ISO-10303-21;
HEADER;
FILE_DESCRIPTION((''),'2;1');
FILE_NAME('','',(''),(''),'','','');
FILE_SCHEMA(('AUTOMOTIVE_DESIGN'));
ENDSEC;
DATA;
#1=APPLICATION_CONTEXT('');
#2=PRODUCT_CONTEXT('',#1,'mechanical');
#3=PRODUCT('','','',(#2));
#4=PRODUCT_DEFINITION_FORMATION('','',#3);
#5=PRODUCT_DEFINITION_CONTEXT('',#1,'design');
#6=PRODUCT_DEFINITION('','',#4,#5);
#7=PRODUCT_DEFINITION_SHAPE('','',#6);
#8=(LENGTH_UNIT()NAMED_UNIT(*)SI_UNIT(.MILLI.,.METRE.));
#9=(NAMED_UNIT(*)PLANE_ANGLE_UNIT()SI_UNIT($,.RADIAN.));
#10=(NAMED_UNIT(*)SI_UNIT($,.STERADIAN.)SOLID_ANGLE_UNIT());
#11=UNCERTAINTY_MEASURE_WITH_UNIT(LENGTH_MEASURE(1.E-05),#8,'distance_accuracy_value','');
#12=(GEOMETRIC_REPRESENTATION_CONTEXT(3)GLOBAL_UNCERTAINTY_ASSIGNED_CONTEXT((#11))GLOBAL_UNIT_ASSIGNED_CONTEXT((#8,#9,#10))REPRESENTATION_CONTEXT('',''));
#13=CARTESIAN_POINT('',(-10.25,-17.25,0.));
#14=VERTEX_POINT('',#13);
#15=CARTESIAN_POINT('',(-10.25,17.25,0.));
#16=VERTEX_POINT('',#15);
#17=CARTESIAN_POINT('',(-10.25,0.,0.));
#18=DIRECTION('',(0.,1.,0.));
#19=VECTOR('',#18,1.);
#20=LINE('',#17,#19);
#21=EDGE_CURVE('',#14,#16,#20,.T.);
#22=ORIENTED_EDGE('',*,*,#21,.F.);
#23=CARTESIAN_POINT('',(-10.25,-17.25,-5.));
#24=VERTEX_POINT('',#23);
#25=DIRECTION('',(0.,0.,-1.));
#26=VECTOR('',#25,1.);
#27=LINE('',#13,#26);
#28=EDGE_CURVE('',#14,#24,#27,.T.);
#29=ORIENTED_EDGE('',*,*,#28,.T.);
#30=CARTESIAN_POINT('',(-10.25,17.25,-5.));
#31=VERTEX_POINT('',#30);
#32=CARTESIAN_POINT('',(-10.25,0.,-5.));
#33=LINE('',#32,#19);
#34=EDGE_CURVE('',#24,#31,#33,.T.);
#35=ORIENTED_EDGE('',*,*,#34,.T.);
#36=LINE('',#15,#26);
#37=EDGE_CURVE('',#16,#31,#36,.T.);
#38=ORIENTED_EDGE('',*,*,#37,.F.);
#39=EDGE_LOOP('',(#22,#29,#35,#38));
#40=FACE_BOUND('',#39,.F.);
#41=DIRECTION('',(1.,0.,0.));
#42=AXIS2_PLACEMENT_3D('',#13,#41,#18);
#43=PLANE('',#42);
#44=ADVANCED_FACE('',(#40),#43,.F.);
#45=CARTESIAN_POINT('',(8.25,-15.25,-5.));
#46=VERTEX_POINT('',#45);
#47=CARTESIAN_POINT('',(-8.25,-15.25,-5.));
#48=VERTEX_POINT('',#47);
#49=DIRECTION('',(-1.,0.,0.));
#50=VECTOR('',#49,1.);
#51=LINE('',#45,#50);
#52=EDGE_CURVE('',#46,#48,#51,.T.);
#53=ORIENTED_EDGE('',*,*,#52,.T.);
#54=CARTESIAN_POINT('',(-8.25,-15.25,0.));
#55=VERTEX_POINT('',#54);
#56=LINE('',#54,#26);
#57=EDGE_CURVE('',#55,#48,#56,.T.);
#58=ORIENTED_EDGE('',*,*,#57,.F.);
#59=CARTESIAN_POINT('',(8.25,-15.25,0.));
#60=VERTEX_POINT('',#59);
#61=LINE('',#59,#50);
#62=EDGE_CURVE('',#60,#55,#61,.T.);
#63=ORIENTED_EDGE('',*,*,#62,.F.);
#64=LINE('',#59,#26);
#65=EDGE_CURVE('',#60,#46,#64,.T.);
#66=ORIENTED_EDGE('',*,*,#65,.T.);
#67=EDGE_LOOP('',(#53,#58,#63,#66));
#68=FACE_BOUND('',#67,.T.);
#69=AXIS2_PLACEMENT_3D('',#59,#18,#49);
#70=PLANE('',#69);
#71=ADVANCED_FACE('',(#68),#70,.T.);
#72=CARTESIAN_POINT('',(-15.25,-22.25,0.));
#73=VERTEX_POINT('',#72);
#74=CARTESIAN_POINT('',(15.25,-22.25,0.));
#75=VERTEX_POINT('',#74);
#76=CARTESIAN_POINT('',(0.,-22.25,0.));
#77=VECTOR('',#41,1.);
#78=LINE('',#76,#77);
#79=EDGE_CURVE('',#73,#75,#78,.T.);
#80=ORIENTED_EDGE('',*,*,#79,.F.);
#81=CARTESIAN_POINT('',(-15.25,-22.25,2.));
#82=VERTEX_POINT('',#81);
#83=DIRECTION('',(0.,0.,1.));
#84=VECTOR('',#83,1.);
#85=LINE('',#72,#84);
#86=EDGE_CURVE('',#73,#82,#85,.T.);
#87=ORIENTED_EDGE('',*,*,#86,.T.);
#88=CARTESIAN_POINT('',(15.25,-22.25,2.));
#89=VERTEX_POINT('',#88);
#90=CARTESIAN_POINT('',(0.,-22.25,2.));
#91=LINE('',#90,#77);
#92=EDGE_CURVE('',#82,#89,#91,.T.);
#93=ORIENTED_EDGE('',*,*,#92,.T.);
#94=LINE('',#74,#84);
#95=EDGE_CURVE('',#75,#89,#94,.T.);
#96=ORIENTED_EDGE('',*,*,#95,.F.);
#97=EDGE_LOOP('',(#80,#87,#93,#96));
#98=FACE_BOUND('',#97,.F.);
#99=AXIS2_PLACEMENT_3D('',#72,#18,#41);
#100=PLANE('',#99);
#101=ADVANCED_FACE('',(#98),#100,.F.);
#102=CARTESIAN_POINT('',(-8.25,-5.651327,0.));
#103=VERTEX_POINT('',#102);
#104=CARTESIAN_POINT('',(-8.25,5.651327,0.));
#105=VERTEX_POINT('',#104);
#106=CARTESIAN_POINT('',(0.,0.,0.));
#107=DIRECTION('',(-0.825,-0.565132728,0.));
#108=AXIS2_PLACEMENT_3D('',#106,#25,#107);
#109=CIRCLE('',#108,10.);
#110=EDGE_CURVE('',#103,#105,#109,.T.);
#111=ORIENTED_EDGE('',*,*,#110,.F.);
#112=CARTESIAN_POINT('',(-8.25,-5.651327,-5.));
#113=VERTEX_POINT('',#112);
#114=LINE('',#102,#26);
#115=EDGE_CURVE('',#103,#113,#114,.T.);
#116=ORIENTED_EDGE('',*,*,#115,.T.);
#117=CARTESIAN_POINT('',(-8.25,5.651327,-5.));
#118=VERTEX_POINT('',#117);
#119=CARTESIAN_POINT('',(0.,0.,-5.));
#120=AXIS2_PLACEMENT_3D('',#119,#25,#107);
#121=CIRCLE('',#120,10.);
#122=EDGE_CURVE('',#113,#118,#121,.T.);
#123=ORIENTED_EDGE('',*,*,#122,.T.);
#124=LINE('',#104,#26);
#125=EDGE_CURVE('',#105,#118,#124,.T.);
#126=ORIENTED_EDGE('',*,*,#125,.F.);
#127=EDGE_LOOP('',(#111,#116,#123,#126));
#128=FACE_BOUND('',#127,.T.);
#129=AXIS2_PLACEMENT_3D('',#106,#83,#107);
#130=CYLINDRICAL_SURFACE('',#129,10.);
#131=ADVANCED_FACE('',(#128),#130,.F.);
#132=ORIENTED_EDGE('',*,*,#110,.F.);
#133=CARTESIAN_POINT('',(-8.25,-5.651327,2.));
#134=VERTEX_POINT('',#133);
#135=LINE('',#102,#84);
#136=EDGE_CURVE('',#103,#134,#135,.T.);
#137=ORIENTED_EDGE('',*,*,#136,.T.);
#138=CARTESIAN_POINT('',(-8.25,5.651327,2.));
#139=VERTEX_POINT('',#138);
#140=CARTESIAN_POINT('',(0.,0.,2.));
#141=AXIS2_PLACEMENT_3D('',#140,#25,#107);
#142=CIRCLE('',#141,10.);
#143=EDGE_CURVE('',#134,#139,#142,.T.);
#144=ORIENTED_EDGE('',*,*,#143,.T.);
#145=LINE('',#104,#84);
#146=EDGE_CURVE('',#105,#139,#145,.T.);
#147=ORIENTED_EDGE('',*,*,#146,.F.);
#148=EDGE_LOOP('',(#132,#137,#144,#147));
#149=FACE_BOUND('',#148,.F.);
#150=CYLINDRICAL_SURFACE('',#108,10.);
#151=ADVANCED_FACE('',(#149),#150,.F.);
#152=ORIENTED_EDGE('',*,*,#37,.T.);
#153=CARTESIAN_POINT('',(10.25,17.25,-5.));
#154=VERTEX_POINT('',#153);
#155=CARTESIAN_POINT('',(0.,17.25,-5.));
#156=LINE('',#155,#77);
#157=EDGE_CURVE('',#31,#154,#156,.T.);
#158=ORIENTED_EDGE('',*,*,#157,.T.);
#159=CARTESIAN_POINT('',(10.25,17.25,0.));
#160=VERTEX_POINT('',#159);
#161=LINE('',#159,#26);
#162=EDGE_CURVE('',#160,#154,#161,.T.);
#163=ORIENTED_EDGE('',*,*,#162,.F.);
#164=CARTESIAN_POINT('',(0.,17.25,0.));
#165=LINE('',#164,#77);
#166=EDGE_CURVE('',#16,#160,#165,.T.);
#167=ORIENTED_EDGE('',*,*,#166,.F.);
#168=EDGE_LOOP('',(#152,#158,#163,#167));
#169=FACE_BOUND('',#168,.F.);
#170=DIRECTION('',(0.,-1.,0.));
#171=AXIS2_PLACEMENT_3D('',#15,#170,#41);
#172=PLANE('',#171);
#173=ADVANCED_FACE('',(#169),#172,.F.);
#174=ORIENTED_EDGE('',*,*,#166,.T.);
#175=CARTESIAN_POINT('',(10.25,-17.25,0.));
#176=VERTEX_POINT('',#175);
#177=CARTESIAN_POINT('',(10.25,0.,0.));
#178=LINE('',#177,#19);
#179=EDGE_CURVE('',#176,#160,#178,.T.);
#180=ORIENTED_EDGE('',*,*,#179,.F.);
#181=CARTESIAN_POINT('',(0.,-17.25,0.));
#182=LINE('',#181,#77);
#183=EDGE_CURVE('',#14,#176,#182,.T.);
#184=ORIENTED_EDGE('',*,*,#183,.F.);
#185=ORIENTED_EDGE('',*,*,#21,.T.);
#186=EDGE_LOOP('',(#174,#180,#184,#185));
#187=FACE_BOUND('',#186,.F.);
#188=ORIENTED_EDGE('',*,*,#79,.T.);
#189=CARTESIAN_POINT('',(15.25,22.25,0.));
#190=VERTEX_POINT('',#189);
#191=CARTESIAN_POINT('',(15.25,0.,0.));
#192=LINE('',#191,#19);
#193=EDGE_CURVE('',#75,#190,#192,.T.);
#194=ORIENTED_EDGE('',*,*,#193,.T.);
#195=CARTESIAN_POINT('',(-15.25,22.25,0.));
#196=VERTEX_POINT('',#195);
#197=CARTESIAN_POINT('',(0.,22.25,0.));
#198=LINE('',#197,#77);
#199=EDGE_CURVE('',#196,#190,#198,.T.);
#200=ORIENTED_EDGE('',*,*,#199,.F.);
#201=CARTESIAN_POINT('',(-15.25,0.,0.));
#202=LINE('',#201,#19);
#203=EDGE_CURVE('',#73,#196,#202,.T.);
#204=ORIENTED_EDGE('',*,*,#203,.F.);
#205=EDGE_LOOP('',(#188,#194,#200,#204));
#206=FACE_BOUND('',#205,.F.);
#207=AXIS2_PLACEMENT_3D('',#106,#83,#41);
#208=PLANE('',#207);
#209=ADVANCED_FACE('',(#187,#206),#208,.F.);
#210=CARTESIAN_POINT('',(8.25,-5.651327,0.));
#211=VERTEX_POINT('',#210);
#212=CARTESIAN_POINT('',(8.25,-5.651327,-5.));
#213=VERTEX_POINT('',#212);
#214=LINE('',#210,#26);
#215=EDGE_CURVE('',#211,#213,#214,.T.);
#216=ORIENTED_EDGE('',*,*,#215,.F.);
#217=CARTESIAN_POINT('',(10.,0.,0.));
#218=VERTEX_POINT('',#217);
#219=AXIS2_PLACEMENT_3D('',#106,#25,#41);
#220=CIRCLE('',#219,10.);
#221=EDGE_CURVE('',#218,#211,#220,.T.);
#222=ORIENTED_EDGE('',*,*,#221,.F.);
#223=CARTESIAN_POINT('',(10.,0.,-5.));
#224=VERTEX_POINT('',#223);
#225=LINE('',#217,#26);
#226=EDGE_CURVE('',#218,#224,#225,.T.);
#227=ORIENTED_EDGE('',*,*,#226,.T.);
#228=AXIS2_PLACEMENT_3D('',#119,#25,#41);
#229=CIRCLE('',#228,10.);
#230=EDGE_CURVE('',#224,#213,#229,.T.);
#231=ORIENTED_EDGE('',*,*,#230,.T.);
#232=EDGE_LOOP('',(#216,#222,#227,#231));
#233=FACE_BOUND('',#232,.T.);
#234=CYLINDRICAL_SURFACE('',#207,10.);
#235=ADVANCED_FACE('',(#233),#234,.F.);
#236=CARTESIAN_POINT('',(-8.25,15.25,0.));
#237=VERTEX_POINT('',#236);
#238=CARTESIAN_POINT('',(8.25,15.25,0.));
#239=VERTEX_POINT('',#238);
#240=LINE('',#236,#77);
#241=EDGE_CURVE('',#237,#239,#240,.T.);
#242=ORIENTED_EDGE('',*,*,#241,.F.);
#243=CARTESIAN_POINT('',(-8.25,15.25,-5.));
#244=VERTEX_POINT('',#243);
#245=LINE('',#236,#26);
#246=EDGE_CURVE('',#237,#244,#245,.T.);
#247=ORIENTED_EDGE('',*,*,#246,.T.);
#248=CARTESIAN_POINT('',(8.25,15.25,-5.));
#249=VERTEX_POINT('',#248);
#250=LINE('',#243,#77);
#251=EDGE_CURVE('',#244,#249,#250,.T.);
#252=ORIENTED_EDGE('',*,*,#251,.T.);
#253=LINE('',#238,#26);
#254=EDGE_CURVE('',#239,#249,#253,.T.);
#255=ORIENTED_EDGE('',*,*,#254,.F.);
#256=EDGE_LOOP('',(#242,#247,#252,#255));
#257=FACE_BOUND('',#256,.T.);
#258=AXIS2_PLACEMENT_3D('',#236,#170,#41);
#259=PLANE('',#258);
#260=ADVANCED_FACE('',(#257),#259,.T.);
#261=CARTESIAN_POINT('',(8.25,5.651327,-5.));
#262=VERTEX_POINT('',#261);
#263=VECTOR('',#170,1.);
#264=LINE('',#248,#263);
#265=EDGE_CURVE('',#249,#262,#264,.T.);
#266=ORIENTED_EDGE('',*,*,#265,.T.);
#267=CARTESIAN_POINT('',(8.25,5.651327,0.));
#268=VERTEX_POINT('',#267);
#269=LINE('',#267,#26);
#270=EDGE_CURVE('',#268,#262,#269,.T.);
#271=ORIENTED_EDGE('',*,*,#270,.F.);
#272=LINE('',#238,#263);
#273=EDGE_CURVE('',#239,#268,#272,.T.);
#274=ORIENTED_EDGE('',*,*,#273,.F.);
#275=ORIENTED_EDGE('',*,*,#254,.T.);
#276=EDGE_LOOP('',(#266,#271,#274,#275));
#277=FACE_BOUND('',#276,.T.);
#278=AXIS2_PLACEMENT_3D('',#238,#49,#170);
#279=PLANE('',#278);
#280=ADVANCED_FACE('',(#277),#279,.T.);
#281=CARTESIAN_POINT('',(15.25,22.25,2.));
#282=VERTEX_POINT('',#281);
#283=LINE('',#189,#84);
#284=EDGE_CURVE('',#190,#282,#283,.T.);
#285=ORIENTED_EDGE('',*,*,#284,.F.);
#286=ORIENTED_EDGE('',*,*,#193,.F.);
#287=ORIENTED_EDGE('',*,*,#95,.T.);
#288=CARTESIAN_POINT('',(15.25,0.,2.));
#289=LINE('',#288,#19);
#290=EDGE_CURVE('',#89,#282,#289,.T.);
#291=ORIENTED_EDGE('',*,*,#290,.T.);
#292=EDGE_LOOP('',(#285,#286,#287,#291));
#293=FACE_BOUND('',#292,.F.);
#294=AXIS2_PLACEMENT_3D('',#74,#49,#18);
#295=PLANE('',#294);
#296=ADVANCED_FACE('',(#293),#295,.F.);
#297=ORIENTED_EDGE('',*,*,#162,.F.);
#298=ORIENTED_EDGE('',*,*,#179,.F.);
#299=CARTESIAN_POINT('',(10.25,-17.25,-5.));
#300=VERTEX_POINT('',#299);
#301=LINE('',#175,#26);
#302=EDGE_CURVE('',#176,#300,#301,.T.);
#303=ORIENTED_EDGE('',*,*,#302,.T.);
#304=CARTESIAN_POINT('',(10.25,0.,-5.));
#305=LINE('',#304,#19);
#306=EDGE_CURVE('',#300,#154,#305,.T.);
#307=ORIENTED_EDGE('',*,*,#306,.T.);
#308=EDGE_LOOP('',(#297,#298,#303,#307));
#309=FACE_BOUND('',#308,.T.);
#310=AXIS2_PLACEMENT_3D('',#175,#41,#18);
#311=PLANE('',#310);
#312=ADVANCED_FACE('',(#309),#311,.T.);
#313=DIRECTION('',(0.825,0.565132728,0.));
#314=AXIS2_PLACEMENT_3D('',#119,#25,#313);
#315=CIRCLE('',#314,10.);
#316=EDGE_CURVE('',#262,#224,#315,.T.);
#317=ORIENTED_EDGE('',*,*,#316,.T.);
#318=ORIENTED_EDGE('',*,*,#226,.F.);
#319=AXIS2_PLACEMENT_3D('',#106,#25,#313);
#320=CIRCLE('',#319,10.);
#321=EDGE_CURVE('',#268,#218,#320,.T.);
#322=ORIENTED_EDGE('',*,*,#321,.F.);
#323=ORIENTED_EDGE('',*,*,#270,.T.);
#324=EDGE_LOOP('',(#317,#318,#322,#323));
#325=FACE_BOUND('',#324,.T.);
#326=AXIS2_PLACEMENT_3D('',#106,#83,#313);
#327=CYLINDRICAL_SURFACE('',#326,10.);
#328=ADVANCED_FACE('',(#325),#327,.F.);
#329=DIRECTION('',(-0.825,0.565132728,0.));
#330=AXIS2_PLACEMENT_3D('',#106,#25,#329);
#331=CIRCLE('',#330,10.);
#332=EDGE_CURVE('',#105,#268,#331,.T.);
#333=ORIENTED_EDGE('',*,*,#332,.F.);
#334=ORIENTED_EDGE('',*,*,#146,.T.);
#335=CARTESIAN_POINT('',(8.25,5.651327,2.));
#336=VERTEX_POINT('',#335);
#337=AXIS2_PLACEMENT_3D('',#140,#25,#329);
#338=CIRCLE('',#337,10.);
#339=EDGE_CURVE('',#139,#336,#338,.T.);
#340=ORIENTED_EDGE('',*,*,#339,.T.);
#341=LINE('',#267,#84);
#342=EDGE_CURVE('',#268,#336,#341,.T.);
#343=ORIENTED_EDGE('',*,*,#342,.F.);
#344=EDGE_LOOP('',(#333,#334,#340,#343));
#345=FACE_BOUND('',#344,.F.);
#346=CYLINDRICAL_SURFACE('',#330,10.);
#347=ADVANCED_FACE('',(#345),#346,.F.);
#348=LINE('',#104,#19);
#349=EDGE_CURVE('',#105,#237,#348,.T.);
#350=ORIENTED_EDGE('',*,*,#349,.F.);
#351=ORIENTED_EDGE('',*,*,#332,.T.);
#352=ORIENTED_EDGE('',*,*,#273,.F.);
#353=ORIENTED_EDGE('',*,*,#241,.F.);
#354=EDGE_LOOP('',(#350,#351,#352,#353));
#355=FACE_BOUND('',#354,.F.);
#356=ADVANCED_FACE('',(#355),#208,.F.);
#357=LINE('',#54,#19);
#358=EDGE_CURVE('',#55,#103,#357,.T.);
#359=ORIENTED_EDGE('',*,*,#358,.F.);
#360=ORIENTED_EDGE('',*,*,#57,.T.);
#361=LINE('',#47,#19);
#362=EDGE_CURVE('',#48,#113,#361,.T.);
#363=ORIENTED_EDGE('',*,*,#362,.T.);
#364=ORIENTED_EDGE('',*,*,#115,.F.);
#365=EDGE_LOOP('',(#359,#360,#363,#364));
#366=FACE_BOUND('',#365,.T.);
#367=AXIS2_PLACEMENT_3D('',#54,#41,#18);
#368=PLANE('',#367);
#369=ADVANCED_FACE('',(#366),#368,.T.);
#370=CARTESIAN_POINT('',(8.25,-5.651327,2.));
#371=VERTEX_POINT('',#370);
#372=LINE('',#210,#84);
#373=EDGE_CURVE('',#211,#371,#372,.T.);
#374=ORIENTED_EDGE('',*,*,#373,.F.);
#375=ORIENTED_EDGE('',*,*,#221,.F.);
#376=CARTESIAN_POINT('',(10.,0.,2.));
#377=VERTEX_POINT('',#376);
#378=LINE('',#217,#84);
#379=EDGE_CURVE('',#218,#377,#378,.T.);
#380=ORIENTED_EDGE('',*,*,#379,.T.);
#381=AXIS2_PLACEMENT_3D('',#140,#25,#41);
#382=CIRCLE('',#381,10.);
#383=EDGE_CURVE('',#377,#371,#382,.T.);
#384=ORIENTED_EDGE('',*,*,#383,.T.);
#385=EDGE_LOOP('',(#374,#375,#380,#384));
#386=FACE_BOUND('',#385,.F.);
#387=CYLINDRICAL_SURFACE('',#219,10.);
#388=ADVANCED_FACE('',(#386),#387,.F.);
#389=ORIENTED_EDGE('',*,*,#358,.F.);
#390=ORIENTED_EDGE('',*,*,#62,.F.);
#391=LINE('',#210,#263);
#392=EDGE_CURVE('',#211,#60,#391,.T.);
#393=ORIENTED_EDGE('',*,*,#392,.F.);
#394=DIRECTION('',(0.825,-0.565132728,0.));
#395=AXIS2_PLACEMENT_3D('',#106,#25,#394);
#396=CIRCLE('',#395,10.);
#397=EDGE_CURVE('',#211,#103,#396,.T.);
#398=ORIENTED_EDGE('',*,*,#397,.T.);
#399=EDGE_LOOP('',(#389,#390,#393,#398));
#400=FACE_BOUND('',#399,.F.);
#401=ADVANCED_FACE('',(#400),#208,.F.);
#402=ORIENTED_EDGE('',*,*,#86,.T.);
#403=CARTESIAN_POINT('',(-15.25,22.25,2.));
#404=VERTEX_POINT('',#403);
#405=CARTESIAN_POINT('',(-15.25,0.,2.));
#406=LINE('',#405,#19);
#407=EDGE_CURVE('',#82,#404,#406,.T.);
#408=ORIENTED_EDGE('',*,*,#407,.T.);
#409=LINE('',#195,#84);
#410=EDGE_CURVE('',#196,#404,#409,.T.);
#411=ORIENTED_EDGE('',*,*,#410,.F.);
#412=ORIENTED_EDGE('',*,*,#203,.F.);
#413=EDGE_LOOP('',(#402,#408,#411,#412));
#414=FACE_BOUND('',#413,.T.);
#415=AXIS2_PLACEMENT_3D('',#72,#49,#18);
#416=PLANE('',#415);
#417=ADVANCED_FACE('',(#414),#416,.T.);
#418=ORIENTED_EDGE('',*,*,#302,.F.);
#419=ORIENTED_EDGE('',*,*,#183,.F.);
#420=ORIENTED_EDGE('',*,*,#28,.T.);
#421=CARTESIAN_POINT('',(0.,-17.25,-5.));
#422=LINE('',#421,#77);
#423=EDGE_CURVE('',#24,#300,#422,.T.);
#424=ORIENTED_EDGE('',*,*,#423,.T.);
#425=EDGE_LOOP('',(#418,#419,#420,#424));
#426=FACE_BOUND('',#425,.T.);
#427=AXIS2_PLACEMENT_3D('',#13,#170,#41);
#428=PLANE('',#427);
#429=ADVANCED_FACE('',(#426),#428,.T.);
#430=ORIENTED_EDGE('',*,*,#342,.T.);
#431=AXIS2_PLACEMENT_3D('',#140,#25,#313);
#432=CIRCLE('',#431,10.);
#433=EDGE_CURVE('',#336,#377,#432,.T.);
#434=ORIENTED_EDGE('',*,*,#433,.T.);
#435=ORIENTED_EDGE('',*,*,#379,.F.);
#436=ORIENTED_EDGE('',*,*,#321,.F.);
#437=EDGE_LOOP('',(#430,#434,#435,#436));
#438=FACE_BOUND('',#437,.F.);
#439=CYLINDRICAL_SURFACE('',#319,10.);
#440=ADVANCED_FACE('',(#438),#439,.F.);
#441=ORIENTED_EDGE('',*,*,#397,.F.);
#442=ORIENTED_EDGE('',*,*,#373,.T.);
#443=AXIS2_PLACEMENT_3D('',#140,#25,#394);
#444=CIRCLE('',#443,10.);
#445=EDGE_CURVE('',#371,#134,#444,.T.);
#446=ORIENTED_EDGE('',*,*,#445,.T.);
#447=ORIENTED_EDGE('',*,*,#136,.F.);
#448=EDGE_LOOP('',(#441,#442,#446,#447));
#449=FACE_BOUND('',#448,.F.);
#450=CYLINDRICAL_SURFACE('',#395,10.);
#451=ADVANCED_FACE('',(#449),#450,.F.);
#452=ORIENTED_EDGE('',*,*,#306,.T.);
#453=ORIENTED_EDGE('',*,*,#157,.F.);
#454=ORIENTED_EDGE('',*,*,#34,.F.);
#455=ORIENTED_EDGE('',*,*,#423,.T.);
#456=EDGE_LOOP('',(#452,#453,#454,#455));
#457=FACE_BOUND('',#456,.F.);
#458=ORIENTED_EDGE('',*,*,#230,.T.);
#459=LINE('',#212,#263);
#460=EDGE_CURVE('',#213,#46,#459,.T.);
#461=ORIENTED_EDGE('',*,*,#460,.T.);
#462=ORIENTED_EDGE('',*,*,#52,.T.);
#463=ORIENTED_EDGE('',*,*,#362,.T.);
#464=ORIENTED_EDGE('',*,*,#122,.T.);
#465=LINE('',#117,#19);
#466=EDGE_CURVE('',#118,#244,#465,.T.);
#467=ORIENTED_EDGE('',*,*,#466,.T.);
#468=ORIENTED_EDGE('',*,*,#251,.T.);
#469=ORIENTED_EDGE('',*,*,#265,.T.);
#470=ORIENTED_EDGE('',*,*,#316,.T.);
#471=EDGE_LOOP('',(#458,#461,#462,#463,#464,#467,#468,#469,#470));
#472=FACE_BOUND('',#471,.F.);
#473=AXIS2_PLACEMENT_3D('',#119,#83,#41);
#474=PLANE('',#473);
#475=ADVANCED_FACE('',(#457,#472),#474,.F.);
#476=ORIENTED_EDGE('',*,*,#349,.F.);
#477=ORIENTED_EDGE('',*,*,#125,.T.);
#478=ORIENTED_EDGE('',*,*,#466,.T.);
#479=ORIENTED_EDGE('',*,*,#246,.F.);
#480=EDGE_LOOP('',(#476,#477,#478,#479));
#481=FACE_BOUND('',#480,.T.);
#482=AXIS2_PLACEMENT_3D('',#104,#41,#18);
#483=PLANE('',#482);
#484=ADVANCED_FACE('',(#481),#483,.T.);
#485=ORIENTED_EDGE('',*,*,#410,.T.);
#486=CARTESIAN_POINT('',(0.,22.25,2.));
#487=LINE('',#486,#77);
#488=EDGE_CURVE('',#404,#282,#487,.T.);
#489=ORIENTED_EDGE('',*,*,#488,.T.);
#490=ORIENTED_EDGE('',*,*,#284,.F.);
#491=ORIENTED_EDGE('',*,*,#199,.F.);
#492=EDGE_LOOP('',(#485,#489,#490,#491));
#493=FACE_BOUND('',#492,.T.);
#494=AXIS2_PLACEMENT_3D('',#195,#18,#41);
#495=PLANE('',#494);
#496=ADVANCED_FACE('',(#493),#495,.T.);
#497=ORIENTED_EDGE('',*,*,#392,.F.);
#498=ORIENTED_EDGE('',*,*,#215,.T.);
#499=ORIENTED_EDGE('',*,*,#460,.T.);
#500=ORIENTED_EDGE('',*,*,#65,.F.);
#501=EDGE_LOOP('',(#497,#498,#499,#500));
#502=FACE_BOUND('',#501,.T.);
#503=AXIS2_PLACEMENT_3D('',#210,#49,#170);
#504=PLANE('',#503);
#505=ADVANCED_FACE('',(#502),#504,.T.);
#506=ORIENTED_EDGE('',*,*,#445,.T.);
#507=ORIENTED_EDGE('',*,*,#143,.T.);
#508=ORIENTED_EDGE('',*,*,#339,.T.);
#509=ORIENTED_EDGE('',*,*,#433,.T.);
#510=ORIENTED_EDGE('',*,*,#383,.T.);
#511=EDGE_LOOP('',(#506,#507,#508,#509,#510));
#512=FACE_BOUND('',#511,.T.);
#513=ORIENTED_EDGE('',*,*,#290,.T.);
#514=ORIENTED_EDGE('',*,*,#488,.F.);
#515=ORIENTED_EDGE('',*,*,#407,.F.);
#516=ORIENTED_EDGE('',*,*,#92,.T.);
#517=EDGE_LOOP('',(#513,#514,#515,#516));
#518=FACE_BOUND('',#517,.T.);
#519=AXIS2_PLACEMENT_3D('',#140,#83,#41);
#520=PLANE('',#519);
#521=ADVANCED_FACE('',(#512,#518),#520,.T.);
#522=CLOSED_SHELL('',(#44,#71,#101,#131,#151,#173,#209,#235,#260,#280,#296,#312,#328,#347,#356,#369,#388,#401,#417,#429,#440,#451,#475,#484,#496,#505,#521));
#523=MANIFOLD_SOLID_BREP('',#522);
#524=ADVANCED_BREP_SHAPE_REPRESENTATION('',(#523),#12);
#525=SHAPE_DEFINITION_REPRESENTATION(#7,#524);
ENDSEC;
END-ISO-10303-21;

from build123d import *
from build123d import SkipClean  # not in build123d's __all__

# Parameters (mm, degrees)
F0_W     = 30.5
F0_H     = 44.5
F0_W_2   = 20.5
F0_H_2   = 34.5
F1_DEPTH = 2
F2_DEPTH = 5


with BuildPart() as f1:
    # F0 (on Top) → F1 (new body)
    with BuildSketch(Plane.XY):
        Rectangle(F0_W, F0_H)
        Rectangle(F0_W_2, F0_H_2, mode=Mode.SUBTRACT)
        Rectangle(F0_W_2, F0_H_2)
        with BuildLine():
            ThreePointArc((8.25, 5.6513272777), (9.5524865873, 2.9580398915), (10, 0))
            ThreePointArc((10, 0), (9.5524865873, -2.9580398915), (8.25, -5.6513272777))
            Line((8.25, -5.6513272777), (8.25, -15.25))
            Line((8.25, -15.25), (-8.25, -15.25))
            Line((-8.25, -15.25), (-8.25, -5.6513272777))
            ThreePointArc((-8.25, -5.6513272777), (-10, 0), (-8.25, 5.6513272777))
            Line((-8.25, 5.6513272777), (-8.25, 15.25))
            Line((-8.25, 15.25), (8.25, 15.25))
            Line((8.25, 15.25), (8.25, 5.6513272777))
        make_face(mode=Mode.SUBTRACT)
        with BuildLine():
            ThreePointArc((-8.25, 5.6513272777), (0, 10), (8.25, 5.6513272777))
            Line((8.25, 5.6513272777), (8.25, 15.25))
            Line((8.25, 15.25), (-8.25, 15.25))
            Line((-8.25, 15.25), (-8.25, 5.6513272777))
        make_face()
        with BuildLine():
            Line((8.25, -15.25), (8.25, -5.6513272777))
            ThreePointArc((8.25, -5.6513272777), (0, -10), (-8.25, -5.6513272777))
            Line((-8.25, -5.6513272777), (-8.25, -15.25))
            Line((-8.25, -15.25), (8.25, -15.25))
        make_face()
    extrude(amount=F1_DEPTH)

    # F0 (on Top) → F2 (join)
    with BuildSketch(Plane.XY):
        Rectangle(F0_W_2, F0_H_2)
        with BuildLine():
            ThreePointArc((8.25, 5.6513272777), (9.5524865873, 2.9580398915), (10, 0))
            ThreePointArc((10, 0), (9.5524865873, -2.9580398915), (8.25, -5.6513272777))
            Line((8.25, -5.6513272777), (8.25, -15.25))
            Line((8.25, -15.25), (-8.25, -15.25))
            Line((-8.25, -15.25), (-8.25, -5.6513272777))
            ThreePointArc((-8.25, -5.6513272777), (-10, 0), (-8.25, 5.6513272777))
            Line((-8.25, 5.6513272777), (-8.25, 15.25))
            Line((-8.25, 15.25), (8.25, 15.25))
            Line((8.25, 15.25), (8.25, 5.6513272777))
        make_face(mode=Mode.SUBTRACT)
    with SkipClean():  # cleaning this boolean's faces spoils the solid; the shape is the same uncleaned
        extrude(amount=-F2_DEPTH)


solid = f1.part
